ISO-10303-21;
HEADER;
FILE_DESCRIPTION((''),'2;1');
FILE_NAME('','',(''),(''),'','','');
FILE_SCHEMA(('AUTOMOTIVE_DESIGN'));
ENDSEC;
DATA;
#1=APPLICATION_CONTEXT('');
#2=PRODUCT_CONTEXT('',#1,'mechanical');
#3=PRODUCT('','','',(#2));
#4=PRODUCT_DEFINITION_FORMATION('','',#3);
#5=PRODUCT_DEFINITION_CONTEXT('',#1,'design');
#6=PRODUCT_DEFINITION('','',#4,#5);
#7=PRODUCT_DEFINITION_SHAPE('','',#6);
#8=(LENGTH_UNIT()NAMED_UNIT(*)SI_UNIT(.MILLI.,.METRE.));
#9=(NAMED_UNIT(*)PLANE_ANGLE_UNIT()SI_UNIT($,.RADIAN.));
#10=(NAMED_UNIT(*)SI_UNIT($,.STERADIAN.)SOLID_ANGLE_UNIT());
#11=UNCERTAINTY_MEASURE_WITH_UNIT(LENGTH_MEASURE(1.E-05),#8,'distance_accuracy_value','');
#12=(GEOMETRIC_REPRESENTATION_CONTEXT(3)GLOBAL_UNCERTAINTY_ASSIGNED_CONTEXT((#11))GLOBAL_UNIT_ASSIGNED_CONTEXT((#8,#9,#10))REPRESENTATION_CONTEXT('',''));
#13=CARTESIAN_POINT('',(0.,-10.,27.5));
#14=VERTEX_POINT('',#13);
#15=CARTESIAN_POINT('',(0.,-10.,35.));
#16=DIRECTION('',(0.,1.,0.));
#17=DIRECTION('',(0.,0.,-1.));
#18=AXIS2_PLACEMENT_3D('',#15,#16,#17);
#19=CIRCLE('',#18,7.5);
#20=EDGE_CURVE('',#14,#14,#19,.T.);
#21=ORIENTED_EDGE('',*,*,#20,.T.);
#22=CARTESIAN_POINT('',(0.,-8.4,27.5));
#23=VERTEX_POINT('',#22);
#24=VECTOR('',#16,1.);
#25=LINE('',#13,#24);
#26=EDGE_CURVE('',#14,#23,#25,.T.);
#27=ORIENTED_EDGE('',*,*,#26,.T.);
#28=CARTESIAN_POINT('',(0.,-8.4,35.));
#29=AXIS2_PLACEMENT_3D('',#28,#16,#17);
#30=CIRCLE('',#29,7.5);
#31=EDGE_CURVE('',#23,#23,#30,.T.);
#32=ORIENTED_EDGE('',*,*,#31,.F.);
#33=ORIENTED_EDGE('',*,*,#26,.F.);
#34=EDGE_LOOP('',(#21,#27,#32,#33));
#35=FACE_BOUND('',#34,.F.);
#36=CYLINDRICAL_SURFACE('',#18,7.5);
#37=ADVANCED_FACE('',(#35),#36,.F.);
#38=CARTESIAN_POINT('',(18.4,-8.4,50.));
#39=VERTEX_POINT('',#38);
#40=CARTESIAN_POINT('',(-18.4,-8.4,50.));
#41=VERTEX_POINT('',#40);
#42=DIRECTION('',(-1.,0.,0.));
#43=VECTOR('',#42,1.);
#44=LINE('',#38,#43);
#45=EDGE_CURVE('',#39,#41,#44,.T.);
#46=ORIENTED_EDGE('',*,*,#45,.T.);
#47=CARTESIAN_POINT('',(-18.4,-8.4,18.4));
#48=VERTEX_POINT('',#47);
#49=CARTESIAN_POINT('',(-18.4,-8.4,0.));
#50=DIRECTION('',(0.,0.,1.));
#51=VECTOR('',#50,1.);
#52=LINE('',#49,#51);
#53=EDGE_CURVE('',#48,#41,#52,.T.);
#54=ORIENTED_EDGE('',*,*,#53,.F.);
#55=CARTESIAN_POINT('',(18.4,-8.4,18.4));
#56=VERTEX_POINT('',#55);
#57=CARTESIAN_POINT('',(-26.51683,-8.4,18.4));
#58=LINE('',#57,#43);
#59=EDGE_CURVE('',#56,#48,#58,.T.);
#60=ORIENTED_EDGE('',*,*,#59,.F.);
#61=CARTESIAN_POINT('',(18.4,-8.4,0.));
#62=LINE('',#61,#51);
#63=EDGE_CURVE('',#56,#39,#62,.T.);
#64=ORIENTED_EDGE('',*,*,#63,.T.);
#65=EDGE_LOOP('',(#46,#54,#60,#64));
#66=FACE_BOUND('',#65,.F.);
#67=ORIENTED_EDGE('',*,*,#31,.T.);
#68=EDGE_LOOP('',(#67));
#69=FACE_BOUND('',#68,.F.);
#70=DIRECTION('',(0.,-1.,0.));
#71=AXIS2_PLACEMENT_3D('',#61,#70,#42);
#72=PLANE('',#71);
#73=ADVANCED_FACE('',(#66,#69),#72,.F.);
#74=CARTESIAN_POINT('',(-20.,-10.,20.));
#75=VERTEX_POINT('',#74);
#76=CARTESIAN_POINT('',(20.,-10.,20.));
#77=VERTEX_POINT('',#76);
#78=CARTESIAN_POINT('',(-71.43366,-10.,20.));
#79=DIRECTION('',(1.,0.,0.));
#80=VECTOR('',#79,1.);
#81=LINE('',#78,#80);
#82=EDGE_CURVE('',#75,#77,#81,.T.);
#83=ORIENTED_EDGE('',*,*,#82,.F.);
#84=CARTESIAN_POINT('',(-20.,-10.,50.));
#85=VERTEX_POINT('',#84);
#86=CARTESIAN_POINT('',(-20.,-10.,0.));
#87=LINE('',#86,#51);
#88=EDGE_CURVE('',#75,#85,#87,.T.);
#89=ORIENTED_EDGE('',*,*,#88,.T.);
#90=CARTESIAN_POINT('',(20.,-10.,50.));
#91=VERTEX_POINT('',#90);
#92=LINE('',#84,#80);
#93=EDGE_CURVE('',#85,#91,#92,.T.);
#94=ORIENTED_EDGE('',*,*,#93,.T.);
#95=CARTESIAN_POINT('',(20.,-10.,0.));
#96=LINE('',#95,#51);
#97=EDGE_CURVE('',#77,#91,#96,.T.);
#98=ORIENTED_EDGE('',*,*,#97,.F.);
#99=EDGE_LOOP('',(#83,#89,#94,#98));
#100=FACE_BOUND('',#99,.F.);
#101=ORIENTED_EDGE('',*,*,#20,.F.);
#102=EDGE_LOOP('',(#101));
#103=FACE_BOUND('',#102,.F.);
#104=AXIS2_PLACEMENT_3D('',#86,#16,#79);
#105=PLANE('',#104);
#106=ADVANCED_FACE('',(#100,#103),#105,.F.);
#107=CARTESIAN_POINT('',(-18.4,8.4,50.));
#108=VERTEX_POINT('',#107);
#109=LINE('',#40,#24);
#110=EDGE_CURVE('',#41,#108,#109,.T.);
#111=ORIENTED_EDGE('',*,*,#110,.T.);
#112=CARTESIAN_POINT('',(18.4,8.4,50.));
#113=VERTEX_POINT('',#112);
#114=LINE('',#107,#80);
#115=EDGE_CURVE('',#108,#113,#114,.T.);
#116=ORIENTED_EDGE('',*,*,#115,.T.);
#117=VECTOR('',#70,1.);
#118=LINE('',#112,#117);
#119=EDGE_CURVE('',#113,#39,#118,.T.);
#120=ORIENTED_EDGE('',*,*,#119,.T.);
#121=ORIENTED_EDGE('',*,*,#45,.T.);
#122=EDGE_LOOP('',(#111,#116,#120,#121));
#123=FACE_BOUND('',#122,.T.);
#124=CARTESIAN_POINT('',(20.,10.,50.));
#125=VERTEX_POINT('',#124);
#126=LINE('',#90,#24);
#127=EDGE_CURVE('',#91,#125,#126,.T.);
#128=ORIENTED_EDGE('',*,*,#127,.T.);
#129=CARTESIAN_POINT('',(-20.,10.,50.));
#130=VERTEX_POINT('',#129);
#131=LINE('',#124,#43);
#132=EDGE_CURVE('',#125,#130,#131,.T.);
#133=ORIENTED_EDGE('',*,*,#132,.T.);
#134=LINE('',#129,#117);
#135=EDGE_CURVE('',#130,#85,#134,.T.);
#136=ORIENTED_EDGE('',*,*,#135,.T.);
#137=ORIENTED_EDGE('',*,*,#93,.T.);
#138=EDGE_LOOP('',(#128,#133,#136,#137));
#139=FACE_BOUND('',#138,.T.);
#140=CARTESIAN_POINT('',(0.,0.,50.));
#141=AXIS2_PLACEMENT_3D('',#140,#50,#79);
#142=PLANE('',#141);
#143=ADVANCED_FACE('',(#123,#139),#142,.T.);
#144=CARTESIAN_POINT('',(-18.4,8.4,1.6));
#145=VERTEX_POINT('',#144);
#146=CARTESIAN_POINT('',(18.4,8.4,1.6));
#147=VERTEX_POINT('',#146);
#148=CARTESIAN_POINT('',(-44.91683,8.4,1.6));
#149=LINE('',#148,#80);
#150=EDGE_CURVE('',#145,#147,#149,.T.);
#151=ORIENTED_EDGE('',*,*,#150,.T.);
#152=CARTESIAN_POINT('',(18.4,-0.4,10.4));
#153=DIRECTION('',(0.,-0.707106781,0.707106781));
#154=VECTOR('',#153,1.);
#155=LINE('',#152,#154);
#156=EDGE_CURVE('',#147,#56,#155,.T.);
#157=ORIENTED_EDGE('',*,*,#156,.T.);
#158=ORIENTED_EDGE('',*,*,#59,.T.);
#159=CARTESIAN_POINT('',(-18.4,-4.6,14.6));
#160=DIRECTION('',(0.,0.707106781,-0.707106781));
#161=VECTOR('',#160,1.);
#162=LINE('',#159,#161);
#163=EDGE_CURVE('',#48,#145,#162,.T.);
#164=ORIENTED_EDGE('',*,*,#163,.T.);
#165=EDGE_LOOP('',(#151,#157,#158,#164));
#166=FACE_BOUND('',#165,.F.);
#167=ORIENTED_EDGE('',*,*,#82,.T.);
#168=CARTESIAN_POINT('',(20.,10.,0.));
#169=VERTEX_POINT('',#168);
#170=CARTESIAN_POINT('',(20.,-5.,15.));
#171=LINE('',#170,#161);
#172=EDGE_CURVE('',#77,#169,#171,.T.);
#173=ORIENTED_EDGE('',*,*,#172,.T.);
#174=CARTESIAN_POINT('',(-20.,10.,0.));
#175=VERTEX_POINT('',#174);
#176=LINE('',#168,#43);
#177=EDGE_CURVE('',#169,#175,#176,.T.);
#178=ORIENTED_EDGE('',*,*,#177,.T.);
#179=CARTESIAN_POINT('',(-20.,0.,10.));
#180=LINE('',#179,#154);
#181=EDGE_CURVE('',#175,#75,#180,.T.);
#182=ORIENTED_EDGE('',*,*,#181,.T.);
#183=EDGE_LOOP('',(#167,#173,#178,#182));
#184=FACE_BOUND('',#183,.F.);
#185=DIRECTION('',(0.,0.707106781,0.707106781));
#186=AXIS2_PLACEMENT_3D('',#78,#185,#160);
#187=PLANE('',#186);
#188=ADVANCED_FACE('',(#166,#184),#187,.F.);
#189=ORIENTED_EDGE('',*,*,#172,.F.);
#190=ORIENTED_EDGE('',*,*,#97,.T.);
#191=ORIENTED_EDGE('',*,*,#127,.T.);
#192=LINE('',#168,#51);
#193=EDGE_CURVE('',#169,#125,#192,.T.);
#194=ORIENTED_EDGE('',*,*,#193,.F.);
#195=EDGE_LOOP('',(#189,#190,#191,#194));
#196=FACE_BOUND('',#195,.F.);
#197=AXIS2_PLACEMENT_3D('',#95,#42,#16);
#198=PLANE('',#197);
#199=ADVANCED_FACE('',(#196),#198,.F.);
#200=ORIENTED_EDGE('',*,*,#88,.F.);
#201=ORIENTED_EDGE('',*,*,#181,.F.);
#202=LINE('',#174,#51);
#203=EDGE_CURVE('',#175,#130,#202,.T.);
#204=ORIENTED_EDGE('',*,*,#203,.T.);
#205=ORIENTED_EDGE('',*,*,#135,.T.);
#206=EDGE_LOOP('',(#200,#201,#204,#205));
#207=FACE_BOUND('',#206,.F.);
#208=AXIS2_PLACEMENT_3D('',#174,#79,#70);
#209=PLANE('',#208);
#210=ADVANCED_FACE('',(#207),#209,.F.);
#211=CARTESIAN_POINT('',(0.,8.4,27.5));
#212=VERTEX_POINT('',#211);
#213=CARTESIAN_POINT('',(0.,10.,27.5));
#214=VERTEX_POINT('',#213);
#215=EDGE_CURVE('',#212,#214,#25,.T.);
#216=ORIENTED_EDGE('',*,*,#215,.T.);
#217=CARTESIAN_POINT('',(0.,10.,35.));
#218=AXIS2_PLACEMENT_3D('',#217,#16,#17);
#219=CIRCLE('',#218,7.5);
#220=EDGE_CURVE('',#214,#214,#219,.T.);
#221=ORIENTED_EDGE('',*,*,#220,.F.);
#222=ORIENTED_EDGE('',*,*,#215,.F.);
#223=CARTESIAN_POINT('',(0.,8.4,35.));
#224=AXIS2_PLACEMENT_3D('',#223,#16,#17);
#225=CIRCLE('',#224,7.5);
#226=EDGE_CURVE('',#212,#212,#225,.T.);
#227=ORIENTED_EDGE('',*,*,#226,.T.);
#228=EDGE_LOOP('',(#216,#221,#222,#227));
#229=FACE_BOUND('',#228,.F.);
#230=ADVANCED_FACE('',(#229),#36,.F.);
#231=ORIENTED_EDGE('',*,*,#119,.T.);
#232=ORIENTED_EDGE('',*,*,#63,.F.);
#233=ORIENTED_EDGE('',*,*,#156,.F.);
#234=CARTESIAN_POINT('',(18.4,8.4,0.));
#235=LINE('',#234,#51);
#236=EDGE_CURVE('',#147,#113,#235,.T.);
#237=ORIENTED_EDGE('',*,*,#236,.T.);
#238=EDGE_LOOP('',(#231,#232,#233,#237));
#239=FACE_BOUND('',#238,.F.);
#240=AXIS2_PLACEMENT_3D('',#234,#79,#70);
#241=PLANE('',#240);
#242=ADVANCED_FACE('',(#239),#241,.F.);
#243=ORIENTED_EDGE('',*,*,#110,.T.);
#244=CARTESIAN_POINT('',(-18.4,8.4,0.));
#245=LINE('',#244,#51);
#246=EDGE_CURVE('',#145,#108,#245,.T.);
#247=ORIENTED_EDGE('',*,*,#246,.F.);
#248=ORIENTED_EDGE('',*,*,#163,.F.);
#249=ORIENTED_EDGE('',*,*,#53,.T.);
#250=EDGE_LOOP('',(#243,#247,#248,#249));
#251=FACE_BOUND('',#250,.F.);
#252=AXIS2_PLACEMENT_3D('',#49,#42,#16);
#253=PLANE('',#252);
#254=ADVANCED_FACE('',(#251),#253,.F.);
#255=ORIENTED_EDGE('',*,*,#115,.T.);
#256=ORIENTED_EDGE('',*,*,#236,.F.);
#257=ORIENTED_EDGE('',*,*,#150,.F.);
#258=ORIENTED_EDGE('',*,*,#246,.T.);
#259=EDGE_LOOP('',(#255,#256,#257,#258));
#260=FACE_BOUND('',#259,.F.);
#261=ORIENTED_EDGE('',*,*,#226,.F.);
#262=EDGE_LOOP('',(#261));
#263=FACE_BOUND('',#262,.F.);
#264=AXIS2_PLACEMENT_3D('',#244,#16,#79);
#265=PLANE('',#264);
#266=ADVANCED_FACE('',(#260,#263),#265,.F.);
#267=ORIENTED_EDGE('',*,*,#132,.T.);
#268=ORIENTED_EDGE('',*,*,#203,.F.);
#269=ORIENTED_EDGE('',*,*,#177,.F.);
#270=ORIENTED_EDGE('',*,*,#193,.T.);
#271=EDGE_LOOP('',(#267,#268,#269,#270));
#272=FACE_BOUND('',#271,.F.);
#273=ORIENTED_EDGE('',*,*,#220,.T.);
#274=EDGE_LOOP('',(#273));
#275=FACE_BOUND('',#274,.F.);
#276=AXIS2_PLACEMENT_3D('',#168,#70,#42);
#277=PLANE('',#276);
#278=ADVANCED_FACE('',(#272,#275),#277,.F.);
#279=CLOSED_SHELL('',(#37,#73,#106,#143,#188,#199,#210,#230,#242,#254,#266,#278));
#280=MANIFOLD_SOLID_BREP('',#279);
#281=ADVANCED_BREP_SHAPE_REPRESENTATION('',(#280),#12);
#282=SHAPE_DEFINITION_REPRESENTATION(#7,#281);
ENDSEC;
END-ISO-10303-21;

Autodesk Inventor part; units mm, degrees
ref_plane "YZ Plane" through (0, 0, 0) normal (1, 0, 0) x (0, 1, 0)
ref_plane "XZ Plane" through (0, 0, 0) normal (0, 1, 0) x (-1, 0, 0)
ref_plane "XY Plane" through (0, 0, 0) normal (0, 0, 1) x (1, 0, 0)
sketch "スケッチ1" plane through (0, 0, 0) normal (0, 0, 1) x (1, 0, 0)
  line L0 (-20, -10) -> (20, -10)
  line L1 (20, -10) -> (20, 10)
  line L2 (20, 10) -> (-20, 10)
  line L3 (-20, 10) -> (-20, -10)
  line L4 (-20, -10) -> (20, 10) construction
  line L5 (20, -10) -> (-20, 10) construction
  line L6 (-18.4, 8.4) -> (18.4, 8.4)
  line L7 (18.4, 8.4) -> (18.4, -8.4)
  line L8 (18.4, -8.4) -> (-18.4, -8.4)
  line L9 (-18.4, -8.4) -> (-18.4, 8.4)
  point P0 (0, 0)
  dimension "d0" = 40
  dimension "d1" = 20
  dimension "d2" = 1.6
extrude "押し出し1" add sketch "スケッチ1" along normal blind 50
chamfer "面取り1" distance 20 angle 45 1 edges at (0, -10, 0)
sketch "スケッチ2" plane through (-20, -10, 50) normal (0, -1, 0) x (1, 0, 0)
  line L0 (0, 0) -> (40, 0) projected
  line L1 (40, -30) -> (40, 0) projected
  point P0 (20, -50)
  point P1 (20, -15)
  dimension "d9" = 15
  dimension "d10" = 20
hole "穴1" at (0, -10, 35) direction (0, 1, 0) diameter 15 end through all
properties part number "Pipe4"
